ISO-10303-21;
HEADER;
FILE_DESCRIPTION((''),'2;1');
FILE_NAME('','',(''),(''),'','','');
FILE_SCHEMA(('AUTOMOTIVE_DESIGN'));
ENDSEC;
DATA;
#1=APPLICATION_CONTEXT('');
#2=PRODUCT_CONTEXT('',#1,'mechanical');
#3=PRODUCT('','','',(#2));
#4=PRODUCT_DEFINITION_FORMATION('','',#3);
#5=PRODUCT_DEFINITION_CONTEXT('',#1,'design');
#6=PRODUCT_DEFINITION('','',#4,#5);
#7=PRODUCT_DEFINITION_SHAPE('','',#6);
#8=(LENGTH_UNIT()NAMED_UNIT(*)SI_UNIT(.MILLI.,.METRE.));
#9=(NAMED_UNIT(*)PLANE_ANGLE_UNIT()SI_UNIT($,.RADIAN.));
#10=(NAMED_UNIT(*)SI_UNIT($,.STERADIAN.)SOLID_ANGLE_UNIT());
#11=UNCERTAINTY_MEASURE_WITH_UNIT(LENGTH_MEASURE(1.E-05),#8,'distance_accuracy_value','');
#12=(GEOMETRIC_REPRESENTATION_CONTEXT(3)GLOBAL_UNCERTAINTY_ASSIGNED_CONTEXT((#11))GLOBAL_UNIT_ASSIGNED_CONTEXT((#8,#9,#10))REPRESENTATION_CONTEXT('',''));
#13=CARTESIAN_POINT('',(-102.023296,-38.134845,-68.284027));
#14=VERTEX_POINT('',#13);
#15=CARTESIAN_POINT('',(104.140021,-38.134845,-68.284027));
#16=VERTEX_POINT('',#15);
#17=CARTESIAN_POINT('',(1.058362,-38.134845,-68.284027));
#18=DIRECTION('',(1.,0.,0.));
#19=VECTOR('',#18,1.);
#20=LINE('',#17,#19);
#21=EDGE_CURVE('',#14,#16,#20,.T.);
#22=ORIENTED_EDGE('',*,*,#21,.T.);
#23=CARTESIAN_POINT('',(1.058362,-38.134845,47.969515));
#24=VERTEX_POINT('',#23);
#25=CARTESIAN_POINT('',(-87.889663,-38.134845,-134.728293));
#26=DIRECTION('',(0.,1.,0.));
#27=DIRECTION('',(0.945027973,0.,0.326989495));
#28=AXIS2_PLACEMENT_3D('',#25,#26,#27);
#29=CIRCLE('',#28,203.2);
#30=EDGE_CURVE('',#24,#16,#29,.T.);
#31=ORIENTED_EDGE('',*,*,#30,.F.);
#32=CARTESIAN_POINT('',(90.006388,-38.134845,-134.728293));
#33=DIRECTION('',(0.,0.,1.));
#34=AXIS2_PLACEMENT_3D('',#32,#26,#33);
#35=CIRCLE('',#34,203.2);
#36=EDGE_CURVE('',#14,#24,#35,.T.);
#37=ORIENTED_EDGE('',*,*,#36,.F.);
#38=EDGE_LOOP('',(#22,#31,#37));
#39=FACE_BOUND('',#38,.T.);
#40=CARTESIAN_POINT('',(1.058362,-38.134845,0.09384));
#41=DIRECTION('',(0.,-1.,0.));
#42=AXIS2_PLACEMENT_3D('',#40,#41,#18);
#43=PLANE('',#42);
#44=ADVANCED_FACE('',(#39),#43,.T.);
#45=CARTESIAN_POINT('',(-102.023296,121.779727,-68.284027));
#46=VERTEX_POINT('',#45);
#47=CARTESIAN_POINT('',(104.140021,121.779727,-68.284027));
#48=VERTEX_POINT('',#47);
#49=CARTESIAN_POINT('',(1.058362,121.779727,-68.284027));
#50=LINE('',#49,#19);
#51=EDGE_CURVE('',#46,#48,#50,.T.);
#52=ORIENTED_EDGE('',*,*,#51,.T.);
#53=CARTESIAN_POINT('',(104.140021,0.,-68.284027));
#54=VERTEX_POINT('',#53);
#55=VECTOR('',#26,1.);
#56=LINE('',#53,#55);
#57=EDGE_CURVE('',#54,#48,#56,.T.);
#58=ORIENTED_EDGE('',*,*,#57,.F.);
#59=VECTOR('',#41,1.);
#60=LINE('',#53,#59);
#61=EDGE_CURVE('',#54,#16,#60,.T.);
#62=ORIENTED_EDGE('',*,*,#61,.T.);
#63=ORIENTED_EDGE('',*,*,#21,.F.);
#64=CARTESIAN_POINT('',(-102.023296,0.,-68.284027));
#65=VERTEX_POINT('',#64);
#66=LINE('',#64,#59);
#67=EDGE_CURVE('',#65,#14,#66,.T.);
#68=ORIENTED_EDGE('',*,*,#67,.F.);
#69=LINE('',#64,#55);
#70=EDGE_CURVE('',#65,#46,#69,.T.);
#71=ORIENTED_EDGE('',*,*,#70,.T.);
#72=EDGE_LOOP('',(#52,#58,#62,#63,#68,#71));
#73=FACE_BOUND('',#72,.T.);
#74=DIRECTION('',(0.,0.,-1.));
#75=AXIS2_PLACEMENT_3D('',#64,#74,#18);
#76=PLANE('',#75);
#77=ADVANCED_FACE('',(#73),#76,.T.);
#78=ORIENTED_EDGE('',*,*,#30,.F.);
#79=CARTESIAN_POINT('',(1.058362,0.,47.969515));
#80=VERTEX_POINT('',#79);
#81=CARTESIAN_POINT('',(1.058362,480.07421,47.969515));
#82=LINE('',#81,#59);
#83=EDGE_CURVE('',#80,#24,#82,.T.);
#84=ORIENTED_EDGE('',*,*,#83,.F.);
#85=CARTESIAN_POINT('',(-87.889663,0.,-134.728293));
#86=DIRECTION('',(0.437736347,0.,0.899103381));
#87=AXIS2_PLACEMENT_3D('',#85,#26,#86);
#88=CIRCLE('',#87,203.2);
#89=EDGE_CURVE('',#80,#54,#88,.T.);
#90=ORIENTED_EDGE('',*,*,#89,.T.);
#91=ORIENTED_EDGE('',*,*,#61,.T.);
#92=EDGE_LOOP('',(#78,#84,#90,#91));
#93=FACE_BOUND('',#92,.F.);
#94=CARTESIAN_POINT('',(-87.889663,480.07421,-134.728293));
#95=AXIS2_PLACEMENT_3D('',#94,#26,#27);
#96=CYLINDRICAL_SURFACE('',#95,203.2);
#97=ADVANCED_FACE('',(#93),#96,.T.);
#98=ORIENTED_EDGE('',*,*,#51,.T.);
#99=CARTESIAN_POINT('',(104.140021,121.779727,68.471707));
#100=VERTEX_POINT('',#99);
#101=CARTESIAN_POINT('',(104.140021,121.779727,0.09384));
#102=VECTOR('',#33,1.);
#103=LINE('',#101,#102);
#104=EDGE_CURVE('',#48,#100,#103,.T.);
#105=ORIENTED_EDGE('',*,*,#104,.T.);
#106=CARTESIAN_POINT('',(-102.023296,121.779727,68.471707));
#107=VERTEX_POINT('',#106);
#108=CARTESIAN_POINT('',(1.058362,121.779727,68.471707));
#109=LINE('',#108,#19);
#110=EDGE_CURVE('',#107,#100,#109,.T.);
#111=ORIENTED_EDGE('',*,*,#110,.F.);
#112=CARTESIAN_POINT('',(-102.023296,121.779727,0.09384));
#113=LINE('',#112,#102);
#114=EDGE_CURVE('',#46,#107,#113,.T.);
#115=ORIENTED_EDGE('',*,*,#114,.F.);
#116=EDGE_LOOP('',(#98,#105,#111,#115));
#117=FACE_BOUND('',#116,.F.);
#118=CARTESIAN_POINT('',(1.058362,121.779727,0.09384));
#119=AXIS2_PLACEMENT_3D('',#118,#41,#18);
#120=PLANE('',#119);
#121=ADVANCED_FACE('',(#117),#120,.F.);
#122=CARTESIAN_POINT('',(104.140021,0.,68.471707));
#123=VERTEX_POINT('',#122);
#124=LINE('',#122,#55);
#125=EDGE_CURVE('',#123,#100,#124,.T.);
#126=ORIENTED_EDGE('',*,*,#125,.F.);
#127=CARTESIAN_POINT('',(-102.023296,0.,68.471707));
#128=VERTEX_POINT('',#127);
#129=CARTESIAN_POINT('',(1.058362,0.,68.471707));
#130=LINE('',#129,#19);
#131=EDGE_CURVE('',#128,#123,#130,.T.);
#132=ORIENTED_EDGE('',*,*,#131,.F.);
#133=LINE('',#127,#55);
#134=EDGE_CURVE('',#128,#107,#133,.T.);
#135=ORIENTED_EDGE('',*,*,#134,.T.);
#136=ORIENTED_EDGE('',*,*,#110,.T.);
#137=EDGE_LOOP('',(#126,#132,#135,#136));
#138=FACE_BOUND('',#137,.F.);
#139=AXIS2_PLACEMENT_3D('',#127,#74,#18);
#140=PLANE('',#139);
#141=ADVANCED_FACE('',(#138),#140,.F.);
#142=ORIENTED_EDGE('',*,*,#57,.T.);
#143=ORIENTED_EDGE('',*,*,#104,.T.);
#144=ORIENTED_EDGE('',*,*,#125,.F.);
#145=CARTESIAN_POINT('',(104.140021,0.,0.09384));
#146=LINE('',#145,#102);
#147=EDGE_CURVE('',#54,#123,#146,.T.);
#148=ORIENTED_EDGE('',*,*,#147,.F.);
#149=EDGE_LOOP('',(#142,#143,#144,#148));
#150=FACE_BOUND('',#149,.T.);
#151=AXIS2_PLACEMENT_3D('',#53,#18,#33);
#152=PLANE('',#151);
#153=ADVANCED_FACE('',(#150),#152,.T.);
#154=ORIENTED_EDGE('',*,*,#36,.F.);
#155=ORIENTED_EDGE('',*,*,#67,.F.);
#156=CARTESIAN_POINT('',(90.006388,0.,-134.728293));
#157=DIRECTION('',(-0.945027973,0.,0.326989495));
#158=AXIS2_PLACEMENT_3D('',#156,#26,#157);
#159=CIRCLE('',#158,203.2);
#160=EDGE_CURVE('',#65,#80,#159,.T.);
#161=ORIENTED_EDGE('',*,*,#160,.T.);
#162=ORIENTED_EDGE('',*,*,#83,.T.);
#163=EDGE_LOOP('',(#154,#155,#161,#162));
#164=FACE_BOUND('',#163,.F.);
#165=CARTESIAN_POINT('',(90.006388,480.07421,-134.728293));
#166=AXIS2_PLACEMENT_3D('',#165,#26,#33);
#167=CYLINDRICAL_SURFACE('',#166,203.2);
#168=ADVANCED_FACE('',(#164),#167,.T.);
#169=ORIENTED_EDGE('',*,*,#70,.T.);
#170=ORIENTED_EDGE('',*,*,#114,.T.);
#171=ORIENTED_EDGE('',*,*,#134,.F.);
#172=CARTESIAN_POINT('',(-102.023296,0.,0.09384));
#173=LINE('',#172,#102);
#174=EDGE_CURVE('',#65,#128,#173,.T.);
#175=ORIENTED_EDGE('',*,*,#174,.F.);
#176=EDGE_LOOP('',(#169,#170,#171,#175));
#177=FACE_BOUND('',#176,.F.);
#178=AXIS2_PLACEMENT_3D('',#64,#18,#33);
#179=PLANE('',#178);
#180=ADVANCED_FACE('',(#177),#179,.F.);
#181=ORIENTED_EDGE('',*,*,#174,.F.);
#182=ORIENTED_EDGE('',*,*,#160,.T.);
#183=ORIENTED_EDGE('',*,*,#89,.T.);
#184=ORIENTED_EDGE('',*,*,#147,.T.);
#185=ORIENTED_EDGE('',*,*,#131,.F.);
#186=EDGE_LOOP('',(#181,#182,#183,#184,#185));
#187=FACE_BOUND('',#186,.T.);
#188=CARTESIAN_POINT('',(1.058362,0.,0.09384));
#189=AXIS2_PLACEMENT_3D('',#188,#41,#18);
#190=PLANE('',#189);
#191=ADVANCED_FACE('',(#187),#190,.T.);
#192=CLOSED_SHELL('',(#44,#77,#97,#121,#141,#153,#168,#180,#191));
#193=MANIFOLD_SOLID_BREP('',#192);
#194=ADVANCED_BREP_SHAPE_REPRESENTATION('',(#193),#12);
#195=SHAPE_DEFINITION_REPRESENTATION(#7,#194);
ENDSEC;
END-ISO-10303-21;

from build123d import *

# Parameters (mm, degrees)
F0_W        = 206.1633169651
F0_H        = 136.7557346821
F3_DEPTH    = 38.1348449737
F7_T1_DEPTH = 998.2832658749
F8_W        = 206.1633169651
F8_H        = 136.7557346821
F8_W_2      = 174.7721135616
F8_H_2      = 16.5176689625
F8_W_3      = 117.4946576357
F8_H_3      = 18.816370517
F2_W        = 206.1633169651
F2_H        = 136.7557346821
F9_DEPTH    = 121.7797268182


# Not quite as in the source:
# - a fillet or chamfer that OpenCascade refuses, or shapes differently, is made with other operations: its cross-section is extruded or revolved along the edge and cut away or added
# - the program builds the solid bodies; features that only make, move or delete a surface that nothing else refers to are left out


with BuildPart() as f3:
    # F0 (on Front) → F3 (new body)
    with BuildSketch(Plane.XZ):
        with Locations((1.0583624244, 0.0938400626)):
            Rectangle(F0_W, F0_H)
    extrude(amount=F3_DEPTH)

    # F7: fillet of radius 203.2 on 2 edges, made by hand

    # F7_s2 → F7_t1 (cut)
    with BuildSketch(Plane.XZ.offset(-480.0742104506)):
        with BuildLine():
            ThreePointArc((104.1400209069, -68.2840272784), (29.9847726477, 30.7886471902), (-87.8896632733, 68.4717074037))
            Line((-87.8896632733, 68.4717074037), (104.1400209069, 68.4717074037))
            Line((104.1400209069, 68.4717074037), (104.1400209069, -68.2840272784))
        make_face()
        with BuildLine():
            ThreePointArc((90.0063881221, 68.4717074037), (-27.868047799, 30.7886471902), (-102.0232960582, -68.2840272784))
            Line((-102.0232960582, -68.2840272784), (-102.0232960582, 68.4717074037))
            Line((-102.0232960582, 68.4717074037), (90.0063881221, 68.4717074037))
        make_face()
    extrude(amount=F7_T1_DEPTH, mode=Mode.SUBTRACT)

    # F8 (on face) + F2 (on face) → F9 (join)
    with BuildSketch(Plane.XZ):
        with Locations((1.0583624244, 0.0938400626)):
            Rectangle(F8_W, F8_H)
        with Locations((0, -32.6089076698)):
            Rectangle(F8_W_2, F8_H_2, mode=Mode.SUBTRACT)
        with Locations((10.9684318304, -3.3599911258)):
            Rectangle(F8_W_3, F8_H_3, mode=Mode.SUBTRACT)
    with BuildSketch(Plane.XZ):
        with Locations((1.0583624244, 0.0938400626)):
            Rectangle(F2_W, F2_H)
    extrude(amount=-F9_DEPTH)


solid = f3.part
